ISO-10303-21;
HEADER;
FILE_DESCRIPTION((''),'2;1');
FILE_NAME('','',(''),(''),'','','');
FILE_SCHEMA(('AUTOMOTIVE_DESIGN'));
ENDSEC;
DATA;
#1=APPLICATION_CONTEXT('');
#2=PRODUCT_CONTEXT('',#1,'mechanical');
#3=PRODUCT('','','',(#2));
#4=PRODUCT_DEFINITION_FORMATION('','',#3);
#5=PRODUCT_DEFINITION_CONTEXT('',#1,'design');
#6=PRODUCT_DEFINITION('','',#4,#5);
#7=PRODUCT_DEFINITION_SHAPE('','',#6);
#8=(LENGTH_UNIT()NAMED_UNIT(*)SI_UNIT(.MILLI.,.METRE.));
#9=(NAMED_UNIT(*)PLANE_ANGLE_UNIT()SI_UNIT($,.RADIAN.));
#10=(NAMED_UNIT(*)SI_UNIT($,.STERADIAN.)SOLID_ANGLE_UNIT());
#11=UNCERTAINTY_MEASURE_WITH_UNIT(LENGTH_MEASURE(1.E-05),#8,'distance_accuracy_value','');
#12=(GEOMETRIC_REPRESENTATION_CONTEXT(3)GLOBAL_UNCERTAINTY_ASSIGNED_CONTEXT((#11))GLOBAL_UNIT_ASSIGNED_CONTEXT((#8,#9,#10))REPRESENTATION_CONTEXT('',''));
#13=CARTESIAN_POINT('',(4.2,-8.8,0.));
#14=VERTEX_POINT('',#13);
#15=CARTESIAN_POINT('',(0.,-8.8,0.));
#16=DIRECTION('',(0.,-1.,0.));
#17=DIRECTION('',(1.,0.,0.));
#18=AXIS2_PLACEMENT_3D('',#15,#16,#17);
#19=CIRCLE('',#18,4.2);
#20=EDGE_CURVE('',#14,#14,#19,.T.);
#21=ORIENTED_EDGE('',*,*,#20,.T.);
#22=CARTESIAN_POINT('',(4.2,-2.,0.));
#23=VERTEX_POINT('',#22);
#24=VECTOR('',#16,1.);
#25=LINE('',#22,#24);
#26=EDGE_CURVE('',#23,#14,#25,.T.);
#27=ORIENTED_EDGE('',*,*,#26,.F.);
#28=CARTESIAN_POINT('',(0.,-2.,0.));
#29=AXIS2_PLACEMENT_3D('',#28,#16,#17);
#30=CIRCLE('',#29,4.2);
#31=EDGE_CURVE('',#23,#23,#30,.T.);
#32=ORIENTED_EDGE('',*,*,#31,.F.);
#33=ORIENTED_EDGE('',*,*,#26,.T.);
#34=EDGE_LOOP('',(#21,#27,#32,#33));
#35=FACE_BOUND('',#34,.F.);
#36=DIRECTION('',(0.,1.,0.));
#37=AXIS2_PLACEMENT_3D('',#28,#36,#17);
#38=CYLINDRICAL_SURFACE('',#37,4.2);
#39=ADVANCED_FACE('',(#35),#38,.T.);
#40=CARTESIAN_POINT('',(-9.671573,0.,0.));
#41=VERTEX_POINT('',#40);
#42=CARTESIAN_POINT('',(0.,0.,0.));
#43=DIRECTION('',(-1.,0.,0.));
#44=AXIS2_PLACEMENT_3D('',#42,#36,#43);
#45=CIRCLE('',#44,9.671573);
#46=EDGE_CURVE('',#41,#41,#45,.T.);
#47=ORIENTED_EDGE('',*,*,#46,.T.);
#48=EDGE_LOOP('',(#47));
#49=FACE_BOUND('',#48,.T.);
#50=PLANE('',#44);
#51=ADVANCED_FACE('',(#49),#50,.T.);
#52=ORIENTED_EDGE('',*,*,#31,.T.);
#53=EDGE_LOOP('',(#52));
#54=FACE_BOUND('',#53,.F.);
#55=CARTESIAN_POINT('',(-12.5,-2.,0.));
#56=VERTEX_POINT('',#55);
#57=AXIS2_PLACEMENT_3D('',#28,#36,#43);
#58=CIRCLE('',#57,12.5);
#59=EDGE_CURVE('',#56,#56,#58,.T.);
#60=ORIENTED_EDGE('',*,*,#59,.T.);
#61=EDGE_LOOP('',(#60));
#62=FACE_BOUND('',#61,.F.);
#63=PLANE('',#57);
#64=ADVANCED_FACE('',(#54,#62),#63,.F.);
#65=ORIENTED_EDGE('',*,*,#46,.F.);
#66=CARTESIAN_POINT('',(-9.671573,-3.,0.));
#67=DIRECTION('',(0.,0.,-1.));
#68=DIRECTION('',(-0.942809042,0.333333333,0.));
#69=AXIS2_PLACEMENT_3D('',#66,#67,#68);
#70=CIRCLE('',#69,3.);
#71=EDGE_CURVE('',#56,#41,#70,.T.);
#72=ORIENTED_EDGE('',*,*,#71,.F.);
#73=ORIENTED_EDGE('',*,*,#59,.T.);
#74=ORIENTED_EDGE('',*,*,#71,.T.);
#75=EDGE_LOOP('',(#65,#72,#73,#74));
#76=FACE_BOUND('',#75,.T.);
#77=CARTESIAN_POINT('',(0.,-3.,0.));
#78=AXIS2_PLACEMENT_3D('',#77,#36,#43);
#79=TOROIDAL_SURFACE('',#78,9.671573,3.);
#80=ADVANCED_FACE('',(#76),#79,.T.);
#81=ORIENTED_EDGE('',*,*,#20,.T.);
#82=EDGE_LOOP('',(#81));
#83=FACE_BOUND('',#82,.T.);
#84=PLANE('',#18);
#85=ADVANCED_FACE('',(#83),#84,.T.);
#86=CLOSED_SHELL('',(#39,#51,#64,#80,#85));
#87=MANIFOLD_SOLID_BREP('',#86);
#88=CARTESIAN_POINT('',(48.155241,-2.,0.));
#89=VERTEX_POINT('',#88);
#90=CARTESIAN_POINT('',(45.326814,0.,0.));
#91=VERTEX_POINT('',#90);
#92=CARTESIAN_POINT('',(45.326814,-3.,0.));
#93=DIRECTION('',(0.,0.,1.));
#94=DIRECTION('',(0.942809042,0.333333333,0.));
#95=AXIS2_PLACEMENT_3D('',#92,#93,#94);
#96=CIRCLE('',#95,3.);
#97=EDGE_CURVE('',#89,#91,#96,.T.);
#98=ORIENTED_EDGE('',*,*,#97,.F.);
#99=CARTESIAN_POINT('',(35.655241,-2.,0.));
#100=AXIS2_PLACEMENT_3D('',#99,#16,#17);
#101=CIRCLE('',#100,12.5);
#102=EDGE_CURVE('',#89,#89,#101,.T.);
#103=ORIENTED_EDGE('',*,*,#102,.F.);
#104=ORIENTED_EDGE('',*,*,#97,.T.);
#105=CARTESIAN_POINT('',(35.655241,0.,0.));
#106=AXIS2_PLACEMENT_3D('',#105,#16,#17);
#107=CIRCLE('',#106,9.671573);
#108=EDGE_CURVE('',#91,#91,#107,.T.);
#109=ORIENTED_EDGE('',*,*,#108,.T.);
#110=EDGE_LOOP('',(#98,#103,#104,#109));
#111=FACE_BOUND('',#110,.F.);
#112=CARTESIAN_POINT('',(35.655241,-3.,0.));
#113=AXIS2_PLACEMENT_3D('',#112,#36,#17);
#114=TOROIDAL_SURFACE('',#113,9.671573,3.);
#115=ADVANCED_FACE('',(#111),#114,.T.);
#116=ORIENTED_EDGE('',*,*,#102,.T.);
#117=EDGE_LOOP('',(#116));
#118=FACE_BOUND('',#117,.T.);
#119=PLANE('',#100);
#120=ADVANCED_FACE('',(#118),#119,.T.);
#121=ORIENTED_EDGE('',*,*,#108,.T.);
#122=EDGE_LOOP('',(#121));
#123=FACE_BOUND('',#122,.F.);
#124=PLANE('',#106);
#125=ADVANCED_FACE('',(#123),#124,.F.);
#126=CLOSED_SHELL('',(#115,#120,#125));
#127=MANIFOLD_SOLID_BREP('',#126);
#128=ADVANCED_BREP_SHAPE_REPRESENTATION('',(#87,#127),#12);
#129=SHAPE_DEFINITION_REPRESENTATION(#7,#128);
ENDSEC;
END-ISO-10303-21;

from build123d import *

# Parameters (mm, degrees)
F0_R     = 4.2
F1_DEPTH = 6.8
F3_R     = 12.5
F3_R_2   = 4.2
F4_DEPTH = 2
F6_R     = 12.5
F7_DEPTH = 2


# Not quite as in the source:
# - a fillet or chamfer that OpenCascade refuses, or shapes differently, is made with other operations: its cross-section is extruded or revolved along the edge and cut away or added


with BuildPart() as f1:
    # F0 (on Front) → F1 (new body)
    with BuildSketch(Plane.XZ):
        Circle(F0_R)
    extrude(amount=F1_DEPTH)


with BuildPart() as f1_1:
    # F2: moved
    add(f1.part.moved(Location((0, -2, 0))))

    # F3 (on face) → F4 (join)
    with BuildSketch(Plane(origin=(0, -2, 0), x_dir=(-1, 0, 0), z_dir=(0, 1, 0))):
        Circle(F3_R)
        Circle(F3_R_2, mode=Mode.SUBTRACT)
        Circle(F3_R_2)
    extrude(amount=F4_DEPTH)

    # F5: fillet of radius 3 on 1 edges, made by hand

    # F5_s1 → F5_t2 (revolve, cut)
    with BuildSketch(Plane.XY):
        with BuildLine():
            ThreePointArc((-12.5, -2), (-11.4036236828, -0.5505102572), (-9.6715728753, 0))
            Line((-9.6715728753, 0), (-12.5, 0))
            Line((-12.5, 0), (-12.5, -2))
        make_face()
    revolve(axis=Axis((0, 0, 0), (0, 1, 0)), mode=Mode.SUBTRACT)


with BuildPart() as f7:
    # F6 (on Front) → F7 (new body)
    with BuildSketch(Plane.XZ):
        with Locations((35.6552414596, 0)):
            Circle(F6_R)
    extrude(amount=F7_DEPTH)

    # F8: fillet of radius 3 on 1 edges, made by hand

    # F8_s1 → F8_t2 (revolve, cut)
    with BuildSketch(Plane.XY):
        with BuildLine():
            ThreePointArc((48.1552414596, -2), (47.0588651424, -0.5505102572), (45.3268143349, 0))
            Line((45.3268143349, 0), (48.1552414596, 0))
            Line((48.1552414596, 0), (48.1552414596, -2))
        make_face()
    revolve(axis=Axis((35.6552414596, 0, 0), (0, -1, 0)), mode=Mode.SUBTRACT)


solid = Compound([f1_1.part, f7.part])
